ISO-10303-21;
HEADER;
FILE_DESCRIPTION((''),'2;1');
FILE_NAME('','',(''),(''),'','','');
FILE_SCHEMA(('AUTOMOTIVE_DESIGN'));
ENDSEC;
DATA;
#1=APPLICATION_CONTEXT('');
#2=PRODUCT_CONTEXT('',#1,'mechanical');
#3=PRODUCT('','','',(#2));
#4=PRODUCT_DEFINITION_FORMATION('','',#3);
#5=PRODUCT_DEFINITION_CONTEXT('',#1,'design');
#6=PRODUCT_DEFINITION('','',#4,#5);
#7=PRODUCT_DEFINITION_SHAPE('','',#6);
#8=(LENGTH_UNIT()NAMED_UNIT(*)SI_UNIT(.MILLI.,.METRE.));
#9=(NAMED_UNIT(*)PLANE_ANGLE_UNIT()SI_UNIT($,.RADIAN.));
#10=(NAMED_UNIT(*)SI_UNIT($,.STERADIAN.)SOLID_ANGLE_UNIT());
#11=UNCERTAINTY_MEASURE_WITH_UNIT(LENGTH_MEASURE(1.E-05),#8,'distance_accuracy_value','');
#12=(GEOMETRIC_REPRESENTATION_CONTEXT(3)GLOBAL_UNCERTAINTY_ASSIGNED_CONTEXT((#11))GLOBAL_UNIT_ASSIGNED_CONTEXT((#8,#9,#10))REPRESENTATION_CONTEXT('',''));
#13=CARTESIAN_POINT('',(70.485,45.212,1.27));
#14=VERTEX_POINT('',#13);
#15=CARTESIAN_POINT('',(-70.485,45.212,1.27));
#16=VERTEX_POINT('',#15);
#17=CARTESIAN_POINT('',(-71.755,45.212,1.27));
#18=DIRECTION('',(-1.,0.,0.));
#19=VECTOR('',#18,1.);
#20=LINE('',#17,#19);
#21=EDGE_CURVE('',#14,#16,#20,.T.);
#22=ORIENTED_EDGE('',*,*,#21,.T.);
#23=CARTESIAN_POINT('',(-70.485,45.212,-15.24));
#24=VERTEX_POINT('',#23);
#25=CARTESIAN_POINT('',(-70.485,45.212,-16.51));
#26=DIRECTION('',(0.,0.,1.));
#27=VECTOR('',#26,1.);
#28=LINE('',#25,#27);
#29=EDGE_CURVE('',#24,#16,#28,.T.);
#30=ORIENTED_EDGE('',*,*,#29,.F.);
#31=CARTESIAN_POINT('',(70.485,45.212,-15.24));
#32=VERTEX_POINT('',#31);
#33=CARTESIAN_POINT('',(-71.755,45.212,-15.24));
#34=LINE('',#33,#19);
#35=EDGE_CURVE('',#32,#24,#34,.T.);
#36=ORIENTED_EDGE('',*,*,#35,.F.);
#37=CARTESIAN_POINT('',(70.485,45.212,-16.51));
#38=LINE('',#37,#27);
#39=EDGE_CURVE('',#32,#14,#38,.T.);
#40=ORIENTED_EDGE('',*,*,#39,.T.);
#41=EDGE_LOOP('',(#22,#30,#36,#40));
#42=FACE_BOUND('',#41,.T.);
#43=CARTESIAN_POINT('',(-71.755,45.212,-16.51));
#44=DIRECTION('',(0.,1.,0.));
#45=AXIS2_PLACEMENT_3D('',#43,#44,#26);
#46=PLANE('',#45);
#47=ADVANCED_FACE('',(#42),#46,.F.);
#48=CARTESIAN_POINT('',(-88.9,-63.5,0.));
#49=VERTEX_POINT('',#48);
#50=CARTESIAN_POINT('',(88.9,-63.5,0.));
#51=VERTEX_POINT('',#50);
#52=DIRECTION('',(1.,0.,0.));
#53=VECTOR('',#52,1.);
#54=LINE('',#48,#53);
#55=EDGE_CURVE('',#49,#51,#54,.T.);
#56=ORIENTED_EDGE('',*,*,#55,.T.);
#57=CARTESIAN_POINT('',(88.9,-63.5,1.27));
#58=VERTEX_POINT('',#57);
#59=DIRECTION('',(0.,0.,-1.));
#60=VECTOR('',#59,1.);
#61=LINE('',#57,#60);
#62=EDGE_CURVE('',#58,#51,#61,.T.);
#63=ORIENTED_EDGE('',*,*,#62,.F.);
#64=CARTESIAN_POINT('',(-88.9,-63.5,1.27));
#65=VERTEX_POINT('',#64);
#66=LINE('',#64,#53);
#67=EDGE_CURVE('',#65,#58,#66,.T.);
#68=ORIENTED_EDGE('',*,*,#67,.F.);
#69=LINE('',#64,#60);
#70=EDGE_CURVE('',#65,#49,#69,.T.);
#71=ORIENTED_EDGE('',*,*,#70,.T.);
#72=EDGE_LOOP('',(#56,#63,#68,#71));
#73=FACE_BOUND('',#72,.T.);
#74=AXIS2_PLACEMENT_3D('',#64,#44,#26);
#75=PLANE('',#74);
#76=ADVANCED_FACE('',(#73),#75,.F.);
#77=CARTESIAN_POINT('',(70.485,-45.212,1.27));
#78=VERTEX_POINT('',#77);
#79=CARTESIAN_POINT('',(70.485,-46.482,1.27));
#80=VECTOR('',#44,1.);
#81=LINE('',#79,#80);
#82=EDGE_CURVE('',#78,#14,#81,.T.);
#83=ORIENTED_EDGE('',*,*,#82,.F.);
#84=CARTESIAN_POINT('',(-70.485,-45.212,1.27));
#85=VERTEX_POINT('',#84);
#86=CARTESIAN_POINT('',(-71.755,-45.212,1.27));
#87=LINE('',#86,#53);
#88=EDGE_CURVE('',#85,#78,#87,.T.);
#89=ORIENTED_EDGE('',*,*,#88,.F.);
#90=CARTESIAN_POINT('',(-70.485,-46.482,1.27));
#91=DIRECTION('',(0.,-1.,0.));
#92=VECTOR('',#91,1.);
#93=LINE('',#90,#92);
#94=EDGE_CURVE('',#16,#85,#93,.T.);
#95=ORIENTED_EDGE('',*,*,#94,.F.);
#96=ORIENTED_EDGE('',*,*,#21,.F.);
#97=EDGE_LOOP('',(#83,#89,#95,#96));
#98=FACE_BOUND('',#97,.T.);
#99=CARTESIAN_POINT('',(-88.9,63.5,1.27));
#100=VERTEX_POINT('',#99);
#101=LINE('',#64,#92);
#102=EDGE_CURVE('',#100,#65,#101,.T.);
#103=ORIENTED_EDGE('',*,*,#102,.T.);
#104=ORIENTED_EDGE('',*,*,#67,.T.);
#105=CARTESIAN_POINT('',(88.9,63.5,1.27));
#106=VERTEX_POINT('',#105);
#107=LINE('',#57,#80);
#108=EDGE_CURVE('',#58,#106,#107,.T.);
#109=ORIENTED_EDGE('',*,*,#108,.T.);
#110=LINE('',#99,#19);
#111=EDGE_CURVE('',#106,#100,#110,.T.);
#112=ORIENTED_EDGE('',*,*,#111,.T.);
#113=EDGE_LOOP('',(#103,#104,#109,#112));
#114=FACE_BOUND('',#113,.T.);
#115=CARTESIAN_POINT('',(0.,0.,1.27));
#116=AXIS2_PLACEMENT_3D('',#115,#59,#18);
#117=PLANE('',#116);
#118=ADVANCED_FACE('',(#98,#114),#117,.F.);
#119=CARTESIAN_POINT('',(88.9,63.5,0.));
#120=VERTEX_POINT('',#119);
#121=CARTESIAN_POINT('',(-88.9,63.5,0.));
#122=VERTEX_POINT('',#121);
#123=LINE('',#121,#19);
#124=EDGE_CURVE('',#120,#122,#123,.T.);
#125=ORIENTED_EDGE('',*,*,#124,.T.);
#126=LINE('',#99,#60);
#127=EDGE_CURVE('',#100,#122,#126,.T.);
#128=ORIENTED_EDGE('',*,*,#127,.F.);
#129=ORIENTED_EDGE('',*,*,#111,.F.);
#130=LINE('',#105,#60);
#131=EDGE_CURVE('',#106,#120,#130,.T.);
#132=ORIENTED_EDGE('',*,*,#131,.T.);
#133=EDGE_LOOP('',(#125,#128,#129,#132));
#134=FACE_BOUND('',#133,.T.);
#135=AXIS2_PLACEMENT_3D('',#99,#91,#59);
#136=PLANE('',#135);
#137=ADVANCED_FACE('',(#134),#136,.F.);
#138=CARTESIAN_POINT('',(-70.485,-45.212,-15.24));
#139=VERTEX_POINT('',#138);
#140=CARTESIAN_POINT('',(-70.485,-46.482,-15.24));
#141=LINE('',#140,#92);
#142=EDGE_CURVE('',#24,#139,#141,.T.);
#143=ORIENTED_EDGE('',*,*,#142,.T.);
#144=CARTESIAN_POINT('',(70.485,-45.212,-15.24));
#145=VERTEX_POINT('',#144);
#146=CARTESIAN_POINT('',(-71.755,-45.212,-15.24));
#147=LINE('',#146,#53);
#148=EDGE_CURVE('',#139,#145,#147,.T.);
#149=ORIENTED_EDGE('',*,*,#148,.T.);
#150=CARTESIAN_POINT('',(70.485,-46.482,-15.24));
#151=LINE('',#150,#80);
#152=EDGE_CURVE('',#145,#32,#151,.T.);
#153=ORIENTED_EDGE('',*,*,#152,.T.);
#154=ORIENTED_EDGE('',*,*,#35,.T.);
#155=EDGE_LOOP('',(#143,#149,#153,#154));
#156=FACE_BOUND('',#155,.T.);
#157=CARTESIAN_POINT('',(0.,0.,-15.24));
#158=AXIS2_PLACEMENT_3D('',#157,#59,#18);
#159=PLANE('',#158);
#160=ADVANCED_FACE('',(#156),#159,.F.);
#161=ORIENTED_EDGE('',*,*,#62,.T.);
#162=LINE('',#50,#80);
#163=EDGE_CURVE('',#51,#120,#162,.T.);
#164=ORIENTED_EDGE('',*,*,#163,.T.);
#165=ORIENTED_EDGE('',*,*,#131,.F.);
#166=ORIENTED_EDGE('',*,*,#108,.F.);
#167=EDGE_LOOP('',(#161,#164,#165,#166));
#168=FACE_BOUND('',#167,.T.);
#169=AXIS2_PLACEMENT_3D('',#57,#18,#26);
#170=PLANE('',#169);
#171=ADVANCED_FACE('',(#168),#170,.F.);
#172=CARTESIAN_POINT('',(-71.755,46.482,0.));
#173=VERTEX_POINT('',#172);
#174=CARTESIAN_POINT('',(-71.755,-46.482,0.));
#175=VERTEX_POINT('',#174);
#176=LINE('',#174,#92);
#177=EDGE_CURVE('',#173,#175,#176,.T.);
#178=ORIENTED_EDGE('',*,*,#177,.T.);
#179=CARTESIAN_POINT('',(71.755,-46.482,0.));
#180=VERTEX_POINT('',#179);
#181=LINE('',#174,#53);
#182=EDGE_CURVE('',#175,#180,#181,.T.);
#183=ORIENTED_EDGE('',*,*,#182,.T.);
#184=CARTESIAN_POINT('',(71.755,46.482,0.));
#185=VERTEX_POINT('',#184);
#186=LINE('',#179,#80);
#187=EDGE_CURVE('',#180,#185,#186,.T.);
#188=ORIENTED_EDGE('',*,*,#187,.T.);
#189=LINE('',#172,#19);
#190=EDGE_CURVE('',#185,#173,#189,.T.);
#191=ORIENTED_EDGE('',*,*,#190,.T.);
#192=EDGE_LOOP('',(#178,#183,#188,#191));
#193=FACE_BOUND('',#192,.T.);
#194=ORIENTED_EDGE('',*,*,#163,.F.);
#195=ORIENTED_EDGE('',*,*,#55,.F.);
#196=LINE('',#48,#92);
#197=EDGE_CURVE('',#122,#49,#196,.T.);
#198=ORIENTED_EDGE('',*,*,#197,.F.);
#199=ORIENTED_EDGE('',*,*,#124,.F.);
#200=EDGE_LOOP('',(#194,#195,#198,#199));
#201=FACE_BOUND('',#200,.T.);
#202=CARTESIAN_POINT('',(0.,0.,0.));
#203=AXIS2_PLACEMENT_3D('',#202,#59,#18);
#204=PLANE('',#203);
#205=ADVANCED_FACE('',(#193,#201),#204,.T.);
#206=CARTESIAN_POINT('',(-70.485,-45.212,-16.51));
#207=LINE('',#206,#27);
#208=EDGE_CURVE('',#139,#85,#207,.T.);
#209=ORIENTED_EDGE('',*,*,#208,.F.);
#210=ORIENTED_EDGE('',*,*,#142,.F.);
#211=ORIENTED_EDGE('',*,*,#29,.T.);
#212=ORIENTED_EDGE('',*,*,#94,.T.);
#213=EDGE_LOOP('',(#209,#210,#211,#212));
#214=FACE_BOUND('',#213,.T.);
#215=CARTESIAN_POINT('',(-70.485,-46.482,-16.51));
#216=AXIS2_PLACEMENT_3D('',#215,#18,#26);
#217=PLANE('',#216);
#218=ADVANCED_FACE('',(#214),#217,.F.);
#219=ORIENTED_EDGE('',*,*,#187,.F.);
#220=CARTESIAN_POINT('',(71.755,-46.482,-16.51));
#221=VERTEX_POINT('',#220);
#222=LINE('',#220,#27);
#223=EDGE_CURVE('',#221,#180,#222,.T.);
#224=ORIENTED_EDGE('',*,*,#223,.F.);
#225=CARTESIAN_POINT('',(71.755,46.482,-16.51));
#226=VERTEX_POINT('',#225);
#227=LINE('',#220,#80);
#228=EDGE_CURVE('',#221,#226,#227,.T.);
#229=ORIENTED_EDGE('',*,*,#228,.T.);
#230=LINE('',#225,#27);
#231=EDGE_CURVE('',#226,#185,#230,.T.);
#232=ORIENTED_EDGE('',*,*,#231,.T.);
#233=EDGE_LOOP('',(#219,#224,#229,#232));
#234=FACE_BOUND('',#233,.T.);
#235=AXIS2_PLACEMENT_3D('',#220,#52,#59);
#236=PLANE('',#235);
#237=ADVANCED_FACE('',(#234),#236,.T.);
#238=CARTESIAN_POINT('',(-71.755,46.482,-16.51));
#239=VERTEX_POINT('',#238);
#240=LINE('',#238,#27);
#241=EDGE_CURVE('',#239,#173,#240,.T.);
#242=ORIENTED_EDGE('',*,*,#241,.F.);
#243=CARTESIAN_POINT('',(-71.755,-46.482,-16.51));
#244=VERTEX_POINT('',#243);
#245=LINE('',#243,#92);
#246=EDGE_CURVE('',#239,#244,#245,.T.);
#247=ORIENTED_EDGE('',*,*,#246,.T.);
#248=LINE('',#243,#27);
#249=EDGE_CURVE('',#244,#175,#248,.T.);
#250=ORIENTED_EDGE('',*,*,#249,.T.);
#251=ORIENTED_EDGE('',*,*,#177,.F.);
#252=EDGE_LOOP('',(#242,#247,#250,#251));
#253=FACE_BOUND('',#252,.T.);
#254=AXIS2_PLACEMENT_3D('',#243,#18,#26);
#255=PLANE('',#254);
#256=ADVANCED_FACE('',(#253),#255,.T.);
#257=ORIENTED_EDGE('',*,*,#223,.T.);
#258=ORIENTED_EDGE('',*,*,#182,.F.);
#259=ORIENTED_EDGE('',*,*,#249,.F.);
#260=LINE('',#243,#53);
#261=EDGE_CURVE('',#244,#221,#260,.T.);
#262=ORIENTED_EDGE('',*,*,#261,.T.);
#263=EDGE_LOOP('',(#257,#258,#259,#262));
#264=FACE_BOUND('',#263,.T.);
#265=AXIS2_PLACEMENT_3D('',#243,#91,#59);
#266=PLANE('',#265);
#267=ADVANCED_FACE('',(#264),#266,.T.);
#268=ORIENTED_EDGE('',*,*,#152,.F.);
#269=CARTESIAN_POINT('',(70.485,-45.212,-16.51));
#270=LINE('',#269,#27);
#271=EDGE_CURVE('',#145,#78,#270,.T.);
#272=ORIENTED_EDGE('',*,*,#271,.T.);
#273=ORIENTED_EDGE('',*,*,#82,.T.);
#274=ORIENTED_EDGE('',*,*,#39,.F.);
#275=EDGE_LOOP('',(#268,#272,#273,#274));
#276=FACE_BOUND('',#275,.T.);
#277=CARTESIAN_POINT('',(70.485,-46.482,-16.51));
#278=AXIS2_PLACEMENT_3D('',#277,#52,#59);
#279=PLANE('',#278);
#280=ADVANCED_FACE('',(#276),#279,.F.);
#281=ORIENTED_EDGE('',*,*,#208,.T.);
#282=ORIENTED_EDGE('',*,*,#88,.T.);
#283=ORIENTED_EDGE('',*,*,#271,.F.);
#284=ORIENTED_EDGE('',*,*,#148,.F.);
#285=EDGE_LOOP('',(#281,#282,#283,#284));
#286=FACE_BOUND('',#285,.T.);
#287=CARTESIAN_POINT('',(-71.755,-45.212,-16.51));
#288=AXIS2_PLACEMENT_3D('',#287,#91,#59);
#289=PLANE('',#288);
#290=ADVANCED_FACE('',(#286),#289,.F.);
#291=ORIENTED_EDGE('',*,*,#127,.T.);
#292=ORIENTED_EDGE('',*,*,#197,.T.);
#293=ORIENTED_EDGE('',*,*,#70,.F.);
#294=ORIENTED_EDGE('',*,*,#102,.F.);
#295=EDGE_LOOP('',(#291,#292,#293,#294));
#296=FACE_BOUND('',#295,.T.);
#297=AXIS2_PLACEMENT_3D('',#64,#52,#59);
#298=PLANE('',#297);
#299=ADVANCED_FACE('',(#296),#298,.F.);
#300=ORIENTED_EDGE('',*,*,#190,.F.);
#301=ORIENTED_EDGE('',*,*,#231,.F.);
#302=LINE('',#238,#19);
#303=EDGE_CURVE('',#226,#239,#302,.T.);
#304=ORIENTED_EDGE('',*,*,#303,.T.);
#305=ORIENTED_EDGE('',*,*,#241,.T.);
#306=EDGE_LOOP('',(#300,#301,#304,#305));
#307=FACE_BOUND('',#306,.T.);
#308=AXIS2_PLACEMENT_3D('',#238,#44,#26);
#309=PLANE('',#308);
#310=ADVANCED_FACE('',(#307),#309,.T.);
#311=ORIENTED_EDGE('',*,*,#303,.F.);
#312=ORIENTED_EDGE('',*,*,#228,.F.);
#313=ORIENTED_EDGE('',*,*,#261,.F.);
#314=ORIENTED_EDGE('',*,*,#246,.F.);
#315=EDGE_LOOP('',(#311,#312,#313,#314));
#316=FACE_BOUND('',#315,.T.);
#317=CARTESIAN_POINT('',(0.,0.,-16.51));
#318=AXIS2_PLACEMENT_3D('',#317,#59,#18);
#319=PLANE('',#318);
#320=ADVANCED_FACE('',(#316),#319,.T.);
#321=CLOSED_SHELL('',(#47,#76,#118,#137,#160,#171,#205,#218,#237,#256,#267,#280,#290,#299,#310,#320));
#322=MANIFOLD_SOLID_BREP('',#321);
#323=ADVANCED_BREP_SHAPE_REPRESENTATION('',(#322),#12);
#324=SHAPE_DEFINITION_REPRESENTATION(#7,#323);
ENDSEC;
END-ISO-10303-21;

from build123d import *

# Parameters (mm, degrees)
SKETCH1_W           = 143.51
SKETCH1_H           = 92.964
BOSS_EXTRUDE1_DEPTH = 16.51
SKETCH2_W           = 177.8
SKETCH2_H           = 127
BOSS_EXTRUDE2_DEPTH = 1.27
SHELL1_START        = -70.485
SHELL1_OUTLINE_W    = 90.424
SHELL1_OUTLINE_H    = 16.51
SHELL1_DEPTH        = 140.97


# Read off the part's stored shape, not the designer's step: Shell1
with BuildPart() as part:
    # Sketch1 → Boss-Extrude1 (new body)
    with BuildSketch(Plane.XY):
        Rectangle(SKETCH1_W, SKETCH1_H)
    extrude(amount=-BOSS_EXTRUDE1_DEPTH)

    # Sketch2 → Boss-Extrude2 (add)
    with BuildSketch(Plane.XY):
        Rectangle(SKETCH2_W, SKETCH2_H)
    extrude(amount=BOSS_EXTRUDE2_DEPTH)

    # Shell1 outline → Shell1 (cut)
    with BuildSketch(Plane.YZ.offset(SHELL1_START)):
        with Locations((0, -6.985)):
            Rectangle(SHELL1_OUTLINE_W, SHELL1_OUTLINE_H)
    extrude(amount=SHELL1_DEPTH, mode=Mode.SUBTRACT)


solid = part.part
